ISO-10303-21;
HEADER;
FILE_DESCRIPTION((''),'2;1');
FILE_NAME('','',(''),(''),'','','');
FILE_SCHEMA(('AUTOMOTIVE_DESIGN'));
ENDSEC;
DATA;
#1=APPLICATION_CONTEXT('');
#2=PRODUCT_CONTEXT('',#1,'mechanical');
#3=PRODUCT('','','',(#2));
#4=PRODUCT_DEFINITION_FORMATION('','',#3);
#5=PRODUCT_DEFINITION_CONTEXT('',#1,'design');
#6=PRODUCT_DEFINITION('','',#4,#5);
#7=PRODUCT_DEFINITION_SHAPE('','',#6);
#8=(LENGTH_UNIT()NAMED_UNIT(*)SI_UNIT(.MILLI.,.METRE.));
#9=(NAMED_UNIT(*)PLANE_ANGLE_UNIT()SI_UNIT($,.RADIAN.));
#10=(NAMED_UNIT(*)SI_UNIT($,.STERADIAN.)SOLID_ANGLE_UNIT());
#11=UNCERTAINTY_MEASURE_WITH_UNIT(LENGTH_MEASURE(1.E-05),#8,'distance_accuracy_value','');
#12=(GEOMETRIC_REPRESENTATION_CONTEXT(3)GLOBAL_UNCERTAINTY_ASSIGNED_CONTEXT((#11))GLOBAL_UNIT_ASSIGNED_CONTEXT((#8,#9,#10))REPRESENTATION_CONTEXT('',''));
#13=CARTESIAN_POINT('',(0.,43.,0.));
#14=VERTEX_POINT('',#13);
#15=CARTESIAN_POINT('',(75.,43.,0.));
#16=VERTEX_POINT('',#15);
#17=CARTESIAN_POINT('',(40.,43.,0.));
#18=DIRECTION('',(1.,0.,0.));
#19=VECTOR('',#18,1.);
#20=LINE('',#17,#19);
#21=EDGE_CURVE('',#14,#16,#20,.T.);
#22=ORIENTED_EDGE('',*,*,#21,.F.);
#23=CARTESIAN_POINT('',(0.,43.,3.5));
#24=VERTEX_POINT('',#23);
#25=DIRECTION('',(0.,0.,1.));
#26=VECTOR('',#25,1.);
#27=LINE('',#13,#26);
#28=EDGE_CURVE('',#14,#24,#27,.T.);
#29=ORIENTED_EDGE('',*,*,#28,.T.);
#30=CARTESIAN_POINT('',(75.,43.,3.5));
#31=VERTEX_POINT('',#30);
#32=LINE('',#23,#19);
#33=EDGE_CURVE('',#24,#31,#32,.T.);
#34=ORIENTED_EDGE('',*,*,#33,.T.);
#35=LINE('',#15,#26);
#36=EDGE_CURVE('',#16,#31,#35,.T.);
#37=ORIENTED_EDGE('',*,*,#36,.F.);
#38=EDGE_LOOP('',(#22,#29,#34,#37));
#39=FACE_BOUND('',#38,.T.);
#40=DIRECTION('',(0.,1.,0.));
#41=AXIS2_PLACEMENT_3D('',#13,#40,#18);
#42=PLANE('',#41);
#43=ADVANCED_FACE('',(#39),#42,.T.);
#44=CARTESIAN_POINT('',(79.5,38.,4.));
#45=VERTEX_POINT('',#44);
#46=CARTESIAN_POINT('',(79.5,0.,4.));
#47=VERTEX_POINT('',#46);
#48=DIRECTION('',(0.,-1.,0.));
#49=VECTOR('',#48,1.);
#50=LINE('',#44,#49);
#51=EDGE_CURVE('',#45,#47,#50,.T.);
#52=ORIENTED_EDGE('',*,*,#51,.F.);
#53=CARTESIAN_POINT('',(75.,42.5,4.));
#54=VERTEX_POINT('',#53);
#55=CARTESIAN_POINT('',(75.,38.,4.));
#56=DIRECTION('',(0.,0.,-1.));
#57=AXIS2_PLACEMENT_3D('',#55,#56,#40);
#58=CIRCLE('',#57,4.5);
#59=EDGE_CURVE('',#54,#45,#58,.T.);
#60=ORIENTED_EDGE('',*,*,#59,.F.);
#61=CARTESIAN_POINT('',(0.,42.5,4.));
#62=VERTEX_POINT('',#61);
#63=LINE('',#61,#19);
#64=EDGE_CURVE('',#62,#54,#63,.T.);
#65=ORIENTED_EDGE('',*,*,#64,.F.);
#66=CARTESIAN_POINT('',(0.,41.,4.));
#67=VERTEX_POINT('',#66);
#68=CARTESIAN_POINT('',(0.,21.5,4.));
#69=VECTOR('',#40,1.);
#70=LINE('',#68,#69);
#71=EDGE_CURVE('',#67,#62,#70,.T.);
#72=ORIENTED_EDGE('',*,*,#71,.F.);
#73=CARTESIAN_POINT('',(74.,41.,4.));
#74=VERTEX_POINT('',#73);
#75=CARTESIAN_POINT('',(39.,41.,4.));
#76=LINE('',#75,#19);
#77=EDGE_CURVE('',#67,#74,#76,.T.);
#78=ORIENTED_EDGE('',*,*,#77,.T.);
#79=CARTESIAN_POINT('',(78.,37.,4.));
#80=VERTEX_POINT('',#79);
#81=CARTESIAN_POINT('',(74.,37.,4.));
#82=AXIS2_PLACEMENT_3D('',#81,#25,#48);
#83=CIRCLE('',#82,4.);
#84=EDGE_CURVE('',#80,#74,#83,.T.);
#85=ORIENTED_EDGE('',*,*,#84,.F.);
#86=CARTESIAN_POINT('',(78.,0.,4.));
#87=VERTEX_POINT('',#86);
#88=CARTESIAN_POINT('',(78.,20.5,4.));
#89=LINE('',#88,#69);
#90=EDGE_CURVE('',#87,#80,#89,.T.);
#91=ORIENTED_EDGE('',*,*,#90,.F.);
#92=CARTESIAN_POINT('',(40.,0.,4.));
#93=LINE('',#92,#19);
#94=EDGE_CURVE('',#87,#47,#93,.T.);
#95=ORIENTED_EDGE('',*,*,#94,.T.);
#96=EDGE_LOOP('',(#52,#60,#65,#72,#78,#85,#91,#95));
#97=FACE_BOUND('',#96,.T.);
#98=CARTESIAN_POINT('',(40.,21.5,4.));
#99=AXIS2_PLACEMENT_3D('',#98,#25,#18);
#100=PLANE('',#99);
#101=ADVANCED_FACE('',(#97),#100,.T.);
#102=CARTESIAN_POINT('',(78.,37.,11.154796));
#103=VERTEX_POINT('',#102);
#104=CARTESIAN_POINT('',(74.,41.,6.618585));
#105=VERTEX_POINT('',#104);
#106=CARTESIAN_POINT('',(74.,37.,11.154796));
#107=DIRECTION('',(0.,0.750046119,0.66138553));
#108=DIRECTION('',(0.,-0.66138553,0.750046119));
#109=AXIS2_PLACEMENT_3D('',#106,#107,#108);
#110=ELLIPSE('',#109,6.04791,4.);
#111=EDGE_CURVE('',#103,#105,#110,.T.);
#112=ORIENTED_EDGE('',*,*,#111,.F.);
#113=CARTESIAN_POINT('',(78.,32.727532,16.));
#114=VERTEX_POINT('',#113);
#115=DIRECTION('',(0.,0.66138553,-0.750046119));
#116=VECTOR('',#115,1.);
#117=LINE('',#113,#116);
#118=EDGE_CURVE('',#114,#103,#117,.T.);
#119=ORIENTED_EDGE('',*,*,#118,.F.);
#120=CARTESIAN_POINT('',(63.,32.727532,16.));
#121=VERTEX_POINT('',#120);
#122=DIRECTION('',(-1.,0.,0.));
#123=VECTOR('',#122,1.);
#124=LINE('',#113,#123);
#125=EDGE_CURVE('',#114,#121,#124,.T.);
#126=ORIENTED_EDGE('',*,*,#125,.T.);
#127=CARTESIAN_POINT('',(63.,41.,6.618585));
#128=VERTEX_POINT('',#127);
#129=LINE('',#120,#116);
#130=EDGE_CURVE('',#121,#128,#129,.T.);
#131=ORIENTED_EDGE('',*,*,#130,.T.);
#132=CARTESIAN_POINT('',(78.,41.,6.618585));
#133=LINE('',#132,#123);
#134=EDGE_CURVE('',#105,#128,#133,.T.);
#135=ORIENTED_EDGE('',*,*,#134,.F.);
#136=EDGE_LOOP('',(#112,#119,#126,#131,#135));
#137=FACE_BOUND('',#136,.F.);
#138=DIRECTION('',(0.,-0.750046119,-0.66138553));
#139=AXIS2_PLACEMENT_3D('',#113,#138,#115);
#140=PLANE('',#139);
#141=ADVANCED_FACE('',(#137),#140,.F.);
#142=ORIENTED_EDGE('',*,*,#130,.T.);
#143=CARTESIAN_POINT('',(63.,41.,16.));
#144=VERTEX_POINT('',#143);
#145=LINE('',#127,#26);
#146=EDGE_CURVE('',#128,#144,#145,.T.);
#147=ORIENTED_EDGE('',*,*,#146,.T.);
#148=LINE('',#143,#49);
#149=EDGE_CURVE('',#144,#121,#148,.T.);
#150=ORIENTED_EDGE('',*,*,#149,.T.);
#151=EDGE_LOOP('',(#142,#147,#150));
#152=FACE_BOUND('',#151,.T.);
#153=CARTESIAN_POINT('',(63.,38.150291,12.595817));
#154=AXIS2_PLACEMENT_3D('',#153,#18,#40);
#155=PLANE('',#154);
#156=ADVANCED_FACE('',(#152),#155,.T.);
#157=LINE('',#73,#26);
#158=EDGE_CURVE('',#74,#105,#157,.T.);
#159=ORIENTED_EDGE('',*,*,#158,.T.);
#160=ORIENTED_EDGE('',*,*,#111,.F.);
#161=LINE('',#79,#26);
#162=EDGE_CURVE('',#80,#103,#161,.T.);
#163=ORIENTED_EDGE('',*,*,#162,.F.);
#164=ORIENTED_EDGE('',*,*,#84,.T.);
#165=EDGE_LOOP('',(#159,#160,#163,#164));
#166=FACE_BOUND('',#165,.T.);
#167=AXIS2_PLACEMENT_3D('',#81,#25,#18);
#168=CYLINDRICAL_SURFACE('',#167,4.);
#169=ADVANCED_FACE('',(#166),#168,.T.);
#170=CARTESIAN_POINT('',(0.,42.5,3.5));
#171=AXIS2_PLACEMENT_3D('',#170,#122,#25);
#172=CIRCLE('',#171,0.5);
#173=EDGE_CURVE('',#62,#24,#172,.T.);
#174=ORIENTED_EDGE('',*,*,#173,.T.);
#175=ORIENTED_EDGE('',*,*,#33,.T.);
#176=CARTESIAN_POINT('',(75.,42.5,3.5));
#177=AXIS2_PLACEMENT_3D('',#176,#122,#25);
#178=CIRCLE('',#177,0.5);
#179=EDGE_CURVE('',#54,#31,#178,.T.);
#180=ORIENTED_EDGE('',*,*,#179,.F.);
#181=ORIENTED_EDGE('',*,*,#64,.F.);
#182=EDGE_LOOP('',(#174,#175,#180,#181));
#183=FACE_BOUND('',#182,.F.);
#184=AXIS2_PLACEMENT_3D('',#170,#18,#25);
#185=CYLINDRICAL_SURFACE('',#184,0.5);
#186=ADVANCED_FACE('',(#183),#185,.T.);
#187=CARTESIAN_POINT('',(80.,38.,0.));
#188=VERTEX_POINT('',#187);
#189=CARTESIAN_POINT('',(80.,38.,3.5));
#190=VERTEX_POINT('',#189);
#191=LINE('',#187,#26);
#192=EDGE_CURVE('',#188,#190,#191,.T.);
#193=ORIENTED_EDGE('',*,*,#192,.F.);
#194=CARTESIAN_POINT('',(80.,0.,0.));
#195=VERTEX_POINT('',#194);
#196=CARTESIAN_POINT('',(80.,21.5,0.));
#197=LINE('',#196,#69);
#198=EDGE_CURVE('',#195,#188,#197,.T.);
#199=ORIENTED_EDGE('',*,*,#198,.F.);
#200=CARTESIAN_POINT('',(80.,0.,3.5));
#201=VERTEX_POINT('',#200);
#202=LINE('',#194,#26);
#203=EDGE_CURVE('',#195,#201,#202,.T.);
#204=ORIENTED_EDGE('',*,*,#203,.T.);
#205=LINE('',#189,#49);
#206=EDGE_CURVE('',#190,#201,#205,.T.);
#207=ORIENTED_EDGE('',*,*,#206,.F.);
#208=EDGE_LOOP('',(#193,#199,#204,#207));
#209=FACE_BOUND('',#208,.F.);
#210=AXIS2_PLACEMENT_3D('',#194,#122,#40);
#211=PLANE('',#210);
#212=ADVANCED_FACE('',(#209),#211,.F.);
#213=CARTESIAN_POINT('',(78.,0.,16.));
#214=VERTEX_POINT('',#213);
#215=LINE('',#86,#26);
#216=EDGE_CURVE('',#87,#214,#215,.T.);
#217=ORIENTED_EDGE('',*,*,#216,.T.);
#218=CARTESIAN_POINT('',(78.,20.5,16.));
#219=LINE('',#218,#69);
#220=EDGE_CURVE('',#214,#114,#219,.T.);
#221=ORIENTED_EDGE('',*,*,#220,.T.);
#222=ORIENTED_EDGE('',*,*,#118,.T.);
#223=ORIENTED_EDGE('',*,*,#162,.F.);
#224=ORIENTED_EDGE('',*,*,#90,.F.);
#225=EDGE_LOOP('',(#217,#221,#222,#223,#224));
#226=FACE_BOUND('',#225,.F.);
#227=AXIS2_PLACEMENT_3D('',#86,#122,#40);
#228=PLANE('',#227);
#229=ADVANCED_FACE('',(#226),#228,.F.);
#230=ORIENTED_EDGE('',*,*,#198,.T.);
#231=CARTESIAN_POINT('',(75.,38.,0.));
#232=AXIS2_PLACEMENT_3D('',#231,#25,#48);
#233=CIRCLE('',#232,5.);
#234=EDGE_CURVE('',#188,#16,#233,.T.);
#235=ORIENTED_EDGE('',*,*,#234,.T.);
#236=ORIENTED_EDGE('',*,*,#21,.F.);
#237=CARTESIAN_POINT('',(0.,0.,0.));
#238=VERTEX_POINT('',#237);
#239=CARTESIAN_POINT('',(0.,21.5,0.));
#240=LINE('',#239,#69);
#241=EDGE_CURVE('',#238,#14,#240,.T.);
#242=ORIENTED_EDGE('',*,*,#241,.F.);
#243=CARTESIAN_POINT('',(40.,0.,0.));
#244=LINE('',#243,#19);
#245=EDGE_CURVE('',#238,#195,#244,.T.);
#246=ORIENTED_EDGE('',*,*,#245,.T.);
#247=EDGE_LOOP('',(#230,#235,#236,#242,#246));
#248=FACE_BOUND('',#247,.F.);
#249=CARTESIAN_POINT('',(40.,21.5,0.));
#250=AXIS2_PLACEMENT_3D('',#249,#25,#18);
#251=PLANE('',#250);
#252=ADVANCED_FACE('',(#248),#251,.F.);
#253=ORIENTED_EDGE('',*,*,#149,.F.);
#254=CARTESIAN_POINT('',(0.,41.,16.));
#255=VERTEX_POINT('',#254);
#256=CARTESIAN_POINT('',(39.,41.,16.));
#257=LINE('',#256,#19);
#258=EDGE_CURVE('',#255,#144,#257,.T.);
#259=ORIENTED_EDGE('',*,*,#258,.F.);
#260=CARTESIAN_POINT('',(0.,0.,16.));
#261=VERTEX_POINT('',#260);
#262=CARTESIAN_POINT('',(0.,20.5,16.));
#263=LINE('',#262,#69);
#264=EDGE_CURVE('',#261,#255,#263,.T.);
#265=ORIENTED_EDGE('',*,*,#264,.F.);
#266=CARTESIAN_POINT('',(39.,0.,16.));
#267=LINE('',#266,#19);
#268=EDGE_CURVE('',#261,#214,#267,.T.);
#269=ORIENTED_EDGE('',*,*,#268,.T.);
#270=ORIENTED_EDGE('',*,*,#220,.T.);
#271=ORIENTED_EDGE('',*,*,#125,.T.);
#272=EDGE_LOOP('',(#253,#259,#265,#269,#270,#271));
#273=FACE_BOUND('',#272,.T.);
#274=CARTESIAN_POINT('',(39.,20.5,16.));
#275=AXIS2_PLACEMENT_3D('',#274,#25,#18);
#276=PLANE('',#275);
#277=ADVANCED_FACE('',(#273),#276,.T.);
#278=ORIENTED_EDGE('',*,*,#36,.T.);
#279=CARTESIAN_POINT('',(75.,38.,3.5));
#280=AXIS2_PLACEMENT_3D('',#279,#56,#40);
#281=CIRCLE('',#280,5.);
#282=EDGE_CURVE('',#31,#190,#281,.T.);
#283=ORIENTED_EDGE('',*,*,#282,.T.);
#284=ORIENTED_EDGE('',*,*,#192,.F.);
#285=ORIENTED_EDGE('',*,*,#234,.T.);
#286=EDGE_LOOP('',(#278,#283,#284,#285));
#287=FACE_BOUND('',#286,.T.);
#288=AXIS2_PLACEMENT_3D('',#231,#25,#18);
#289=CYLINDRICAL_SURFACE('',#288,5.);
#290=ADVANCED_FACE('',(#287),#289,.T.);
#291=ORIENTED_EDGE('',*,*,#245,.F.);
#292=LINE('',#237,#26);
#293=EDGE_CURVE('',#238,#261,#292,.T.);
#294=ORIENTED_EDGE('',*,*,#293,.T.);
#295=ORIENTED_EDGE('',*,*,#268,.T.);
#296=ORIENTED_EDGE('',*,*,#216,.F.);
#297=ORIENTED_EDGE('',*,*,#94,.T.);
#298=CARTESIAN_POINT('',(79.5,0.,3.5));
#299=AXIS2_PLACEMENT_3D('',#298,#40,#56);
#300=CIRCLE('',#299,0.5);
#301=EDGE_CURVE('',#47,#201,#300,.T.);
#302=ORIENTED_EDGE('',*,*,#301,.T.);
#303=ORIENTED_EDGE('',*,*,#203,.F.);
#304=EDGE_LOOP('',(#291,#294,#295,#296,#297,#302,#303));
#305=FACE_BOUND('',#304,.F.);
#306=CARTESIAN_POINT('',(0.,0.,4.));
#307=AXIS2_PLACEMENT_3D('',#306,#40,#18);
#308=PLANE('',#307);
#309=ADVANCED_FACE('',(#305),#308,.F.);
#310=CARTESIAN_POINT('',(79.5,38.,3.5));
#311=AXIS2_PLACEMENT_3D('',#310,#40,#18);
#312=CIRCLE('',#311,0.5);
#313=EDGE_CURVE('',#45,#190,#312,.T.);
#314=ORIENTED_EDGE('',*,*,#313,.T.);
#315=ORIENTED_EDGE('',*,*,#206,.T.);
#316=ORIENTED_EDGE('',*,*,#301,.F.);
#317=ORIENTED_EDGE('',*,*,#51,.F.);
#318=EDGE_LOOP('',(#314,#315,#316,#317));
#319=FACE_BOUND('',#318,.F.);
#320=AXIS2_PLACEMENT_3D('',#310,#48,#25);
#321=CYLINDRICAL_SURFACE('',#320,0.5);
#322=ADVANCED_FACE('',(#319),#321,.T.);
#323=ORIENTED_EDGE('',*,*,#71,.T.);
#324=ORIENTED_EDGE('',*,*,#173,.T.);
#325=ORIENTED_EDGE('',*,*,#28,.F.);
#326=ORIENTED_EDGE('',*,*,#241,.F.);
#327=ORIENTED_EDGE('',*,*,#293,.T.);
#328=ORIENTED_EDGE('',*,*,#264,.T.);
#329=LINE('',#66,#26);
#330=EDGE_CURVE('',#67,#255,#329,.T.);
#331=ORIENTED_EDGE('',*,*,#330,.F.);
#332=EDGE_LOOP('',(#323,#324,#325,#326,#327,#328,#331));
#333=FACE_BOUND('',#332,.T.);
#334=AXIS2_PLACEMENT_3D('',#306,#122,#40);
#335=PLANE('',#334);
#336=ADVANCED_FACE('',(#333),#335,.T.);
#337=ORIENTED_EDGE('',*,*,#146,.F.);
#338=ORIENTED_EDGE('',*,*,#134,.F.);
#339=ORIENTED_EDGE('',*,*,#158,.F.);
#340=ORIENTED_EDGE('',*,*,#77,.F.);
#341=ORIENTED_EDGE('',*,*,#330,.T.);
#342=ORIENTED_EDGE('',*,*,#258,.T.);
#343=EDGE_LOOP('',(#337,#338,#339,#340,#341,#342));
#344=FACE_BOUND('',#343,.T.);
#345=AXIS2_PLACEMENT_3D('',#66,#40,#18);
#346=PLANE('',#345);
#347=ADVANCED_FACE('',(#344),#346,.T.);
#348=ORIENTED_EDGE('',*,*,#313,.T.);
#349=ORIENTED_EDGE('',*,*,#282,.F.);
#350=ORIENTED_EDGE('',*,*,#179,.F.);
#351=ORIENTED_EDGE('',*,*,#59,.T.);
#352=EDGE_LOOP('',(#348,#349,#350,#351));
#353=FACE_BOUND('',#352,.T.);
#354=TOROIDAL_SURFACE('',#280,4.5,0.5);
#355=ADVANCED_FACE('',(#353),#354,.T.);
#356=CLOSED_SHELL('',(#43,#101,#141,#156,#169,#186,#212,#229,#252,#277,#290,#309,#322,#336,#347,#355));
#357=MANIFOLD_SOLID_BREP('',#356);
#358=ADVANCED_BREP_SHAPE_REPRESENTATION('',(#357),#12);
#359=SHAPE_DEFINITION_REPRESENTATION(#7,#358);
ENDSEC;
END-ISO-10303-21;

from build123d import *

# Parameters (mm, degrees)
F0_W     = 80
F0_H     = 43
F1_DEPTH = 4
F2_W     = 78
F2_H     = 41
F3_DEPTH = 12
F4_R     = 5
F5_R     = 0.5
F7_DEPTH = 15
F8_R     = 4


# Not quite as in the source:
# - a feature of the source that left no trace in its solid (it failed there, or was rolled back) is left out


with BuildPart() as f1:
    # F0 (on Top) → F1 (new body)
    with BuildSketch(Plane.XY):
        with Locations((40, 21.5)):
            Rectangle(F0_W, F0_H)
    extrude(amount=F1_DEPTH)

    # F2 (on face) → F3 (join)
    with BuildSketch(Plane.XY.offset(4)):
        with Locations((39, 20.5)):
            Rectangle(F2_W, F2_H)
    extrude(amount=F3_DEPTH)

    # F4
    f4_edges = [f1.edges().sort_by_distance(p)[0] for p in [
        (80, 43, 2),
    ]]
    fillet(f4_edges, radius=F4_R)

    # F5
    f5_edges = [f1.edges().sort_by_distance(p)[0] for p in [
        (37.5, 43, 4),
        (78.535534, 41.535534, 4),
        (80, 19, 4),
    ]]
    fillet(f5_edges, radius=F5_R)

    # F6 (on face) → F7 (cut)
    with BuildSketch(Plane.YZ.offset(78)):
        Polygon((41, 16), (32.7275320888, 16), (41, 6.6185845062), align=None)
    extrude(amount=-F7_DEPTH, mode=Mode.SUBTRACT)

    # F8
    f8_edges = [f1.edges().sort_by_distance(p)[0] for p in [
        (78, 41, 5.309292),
    ]]
    fillet(f8_edges, radius=F8_R)


solid = f1.part
